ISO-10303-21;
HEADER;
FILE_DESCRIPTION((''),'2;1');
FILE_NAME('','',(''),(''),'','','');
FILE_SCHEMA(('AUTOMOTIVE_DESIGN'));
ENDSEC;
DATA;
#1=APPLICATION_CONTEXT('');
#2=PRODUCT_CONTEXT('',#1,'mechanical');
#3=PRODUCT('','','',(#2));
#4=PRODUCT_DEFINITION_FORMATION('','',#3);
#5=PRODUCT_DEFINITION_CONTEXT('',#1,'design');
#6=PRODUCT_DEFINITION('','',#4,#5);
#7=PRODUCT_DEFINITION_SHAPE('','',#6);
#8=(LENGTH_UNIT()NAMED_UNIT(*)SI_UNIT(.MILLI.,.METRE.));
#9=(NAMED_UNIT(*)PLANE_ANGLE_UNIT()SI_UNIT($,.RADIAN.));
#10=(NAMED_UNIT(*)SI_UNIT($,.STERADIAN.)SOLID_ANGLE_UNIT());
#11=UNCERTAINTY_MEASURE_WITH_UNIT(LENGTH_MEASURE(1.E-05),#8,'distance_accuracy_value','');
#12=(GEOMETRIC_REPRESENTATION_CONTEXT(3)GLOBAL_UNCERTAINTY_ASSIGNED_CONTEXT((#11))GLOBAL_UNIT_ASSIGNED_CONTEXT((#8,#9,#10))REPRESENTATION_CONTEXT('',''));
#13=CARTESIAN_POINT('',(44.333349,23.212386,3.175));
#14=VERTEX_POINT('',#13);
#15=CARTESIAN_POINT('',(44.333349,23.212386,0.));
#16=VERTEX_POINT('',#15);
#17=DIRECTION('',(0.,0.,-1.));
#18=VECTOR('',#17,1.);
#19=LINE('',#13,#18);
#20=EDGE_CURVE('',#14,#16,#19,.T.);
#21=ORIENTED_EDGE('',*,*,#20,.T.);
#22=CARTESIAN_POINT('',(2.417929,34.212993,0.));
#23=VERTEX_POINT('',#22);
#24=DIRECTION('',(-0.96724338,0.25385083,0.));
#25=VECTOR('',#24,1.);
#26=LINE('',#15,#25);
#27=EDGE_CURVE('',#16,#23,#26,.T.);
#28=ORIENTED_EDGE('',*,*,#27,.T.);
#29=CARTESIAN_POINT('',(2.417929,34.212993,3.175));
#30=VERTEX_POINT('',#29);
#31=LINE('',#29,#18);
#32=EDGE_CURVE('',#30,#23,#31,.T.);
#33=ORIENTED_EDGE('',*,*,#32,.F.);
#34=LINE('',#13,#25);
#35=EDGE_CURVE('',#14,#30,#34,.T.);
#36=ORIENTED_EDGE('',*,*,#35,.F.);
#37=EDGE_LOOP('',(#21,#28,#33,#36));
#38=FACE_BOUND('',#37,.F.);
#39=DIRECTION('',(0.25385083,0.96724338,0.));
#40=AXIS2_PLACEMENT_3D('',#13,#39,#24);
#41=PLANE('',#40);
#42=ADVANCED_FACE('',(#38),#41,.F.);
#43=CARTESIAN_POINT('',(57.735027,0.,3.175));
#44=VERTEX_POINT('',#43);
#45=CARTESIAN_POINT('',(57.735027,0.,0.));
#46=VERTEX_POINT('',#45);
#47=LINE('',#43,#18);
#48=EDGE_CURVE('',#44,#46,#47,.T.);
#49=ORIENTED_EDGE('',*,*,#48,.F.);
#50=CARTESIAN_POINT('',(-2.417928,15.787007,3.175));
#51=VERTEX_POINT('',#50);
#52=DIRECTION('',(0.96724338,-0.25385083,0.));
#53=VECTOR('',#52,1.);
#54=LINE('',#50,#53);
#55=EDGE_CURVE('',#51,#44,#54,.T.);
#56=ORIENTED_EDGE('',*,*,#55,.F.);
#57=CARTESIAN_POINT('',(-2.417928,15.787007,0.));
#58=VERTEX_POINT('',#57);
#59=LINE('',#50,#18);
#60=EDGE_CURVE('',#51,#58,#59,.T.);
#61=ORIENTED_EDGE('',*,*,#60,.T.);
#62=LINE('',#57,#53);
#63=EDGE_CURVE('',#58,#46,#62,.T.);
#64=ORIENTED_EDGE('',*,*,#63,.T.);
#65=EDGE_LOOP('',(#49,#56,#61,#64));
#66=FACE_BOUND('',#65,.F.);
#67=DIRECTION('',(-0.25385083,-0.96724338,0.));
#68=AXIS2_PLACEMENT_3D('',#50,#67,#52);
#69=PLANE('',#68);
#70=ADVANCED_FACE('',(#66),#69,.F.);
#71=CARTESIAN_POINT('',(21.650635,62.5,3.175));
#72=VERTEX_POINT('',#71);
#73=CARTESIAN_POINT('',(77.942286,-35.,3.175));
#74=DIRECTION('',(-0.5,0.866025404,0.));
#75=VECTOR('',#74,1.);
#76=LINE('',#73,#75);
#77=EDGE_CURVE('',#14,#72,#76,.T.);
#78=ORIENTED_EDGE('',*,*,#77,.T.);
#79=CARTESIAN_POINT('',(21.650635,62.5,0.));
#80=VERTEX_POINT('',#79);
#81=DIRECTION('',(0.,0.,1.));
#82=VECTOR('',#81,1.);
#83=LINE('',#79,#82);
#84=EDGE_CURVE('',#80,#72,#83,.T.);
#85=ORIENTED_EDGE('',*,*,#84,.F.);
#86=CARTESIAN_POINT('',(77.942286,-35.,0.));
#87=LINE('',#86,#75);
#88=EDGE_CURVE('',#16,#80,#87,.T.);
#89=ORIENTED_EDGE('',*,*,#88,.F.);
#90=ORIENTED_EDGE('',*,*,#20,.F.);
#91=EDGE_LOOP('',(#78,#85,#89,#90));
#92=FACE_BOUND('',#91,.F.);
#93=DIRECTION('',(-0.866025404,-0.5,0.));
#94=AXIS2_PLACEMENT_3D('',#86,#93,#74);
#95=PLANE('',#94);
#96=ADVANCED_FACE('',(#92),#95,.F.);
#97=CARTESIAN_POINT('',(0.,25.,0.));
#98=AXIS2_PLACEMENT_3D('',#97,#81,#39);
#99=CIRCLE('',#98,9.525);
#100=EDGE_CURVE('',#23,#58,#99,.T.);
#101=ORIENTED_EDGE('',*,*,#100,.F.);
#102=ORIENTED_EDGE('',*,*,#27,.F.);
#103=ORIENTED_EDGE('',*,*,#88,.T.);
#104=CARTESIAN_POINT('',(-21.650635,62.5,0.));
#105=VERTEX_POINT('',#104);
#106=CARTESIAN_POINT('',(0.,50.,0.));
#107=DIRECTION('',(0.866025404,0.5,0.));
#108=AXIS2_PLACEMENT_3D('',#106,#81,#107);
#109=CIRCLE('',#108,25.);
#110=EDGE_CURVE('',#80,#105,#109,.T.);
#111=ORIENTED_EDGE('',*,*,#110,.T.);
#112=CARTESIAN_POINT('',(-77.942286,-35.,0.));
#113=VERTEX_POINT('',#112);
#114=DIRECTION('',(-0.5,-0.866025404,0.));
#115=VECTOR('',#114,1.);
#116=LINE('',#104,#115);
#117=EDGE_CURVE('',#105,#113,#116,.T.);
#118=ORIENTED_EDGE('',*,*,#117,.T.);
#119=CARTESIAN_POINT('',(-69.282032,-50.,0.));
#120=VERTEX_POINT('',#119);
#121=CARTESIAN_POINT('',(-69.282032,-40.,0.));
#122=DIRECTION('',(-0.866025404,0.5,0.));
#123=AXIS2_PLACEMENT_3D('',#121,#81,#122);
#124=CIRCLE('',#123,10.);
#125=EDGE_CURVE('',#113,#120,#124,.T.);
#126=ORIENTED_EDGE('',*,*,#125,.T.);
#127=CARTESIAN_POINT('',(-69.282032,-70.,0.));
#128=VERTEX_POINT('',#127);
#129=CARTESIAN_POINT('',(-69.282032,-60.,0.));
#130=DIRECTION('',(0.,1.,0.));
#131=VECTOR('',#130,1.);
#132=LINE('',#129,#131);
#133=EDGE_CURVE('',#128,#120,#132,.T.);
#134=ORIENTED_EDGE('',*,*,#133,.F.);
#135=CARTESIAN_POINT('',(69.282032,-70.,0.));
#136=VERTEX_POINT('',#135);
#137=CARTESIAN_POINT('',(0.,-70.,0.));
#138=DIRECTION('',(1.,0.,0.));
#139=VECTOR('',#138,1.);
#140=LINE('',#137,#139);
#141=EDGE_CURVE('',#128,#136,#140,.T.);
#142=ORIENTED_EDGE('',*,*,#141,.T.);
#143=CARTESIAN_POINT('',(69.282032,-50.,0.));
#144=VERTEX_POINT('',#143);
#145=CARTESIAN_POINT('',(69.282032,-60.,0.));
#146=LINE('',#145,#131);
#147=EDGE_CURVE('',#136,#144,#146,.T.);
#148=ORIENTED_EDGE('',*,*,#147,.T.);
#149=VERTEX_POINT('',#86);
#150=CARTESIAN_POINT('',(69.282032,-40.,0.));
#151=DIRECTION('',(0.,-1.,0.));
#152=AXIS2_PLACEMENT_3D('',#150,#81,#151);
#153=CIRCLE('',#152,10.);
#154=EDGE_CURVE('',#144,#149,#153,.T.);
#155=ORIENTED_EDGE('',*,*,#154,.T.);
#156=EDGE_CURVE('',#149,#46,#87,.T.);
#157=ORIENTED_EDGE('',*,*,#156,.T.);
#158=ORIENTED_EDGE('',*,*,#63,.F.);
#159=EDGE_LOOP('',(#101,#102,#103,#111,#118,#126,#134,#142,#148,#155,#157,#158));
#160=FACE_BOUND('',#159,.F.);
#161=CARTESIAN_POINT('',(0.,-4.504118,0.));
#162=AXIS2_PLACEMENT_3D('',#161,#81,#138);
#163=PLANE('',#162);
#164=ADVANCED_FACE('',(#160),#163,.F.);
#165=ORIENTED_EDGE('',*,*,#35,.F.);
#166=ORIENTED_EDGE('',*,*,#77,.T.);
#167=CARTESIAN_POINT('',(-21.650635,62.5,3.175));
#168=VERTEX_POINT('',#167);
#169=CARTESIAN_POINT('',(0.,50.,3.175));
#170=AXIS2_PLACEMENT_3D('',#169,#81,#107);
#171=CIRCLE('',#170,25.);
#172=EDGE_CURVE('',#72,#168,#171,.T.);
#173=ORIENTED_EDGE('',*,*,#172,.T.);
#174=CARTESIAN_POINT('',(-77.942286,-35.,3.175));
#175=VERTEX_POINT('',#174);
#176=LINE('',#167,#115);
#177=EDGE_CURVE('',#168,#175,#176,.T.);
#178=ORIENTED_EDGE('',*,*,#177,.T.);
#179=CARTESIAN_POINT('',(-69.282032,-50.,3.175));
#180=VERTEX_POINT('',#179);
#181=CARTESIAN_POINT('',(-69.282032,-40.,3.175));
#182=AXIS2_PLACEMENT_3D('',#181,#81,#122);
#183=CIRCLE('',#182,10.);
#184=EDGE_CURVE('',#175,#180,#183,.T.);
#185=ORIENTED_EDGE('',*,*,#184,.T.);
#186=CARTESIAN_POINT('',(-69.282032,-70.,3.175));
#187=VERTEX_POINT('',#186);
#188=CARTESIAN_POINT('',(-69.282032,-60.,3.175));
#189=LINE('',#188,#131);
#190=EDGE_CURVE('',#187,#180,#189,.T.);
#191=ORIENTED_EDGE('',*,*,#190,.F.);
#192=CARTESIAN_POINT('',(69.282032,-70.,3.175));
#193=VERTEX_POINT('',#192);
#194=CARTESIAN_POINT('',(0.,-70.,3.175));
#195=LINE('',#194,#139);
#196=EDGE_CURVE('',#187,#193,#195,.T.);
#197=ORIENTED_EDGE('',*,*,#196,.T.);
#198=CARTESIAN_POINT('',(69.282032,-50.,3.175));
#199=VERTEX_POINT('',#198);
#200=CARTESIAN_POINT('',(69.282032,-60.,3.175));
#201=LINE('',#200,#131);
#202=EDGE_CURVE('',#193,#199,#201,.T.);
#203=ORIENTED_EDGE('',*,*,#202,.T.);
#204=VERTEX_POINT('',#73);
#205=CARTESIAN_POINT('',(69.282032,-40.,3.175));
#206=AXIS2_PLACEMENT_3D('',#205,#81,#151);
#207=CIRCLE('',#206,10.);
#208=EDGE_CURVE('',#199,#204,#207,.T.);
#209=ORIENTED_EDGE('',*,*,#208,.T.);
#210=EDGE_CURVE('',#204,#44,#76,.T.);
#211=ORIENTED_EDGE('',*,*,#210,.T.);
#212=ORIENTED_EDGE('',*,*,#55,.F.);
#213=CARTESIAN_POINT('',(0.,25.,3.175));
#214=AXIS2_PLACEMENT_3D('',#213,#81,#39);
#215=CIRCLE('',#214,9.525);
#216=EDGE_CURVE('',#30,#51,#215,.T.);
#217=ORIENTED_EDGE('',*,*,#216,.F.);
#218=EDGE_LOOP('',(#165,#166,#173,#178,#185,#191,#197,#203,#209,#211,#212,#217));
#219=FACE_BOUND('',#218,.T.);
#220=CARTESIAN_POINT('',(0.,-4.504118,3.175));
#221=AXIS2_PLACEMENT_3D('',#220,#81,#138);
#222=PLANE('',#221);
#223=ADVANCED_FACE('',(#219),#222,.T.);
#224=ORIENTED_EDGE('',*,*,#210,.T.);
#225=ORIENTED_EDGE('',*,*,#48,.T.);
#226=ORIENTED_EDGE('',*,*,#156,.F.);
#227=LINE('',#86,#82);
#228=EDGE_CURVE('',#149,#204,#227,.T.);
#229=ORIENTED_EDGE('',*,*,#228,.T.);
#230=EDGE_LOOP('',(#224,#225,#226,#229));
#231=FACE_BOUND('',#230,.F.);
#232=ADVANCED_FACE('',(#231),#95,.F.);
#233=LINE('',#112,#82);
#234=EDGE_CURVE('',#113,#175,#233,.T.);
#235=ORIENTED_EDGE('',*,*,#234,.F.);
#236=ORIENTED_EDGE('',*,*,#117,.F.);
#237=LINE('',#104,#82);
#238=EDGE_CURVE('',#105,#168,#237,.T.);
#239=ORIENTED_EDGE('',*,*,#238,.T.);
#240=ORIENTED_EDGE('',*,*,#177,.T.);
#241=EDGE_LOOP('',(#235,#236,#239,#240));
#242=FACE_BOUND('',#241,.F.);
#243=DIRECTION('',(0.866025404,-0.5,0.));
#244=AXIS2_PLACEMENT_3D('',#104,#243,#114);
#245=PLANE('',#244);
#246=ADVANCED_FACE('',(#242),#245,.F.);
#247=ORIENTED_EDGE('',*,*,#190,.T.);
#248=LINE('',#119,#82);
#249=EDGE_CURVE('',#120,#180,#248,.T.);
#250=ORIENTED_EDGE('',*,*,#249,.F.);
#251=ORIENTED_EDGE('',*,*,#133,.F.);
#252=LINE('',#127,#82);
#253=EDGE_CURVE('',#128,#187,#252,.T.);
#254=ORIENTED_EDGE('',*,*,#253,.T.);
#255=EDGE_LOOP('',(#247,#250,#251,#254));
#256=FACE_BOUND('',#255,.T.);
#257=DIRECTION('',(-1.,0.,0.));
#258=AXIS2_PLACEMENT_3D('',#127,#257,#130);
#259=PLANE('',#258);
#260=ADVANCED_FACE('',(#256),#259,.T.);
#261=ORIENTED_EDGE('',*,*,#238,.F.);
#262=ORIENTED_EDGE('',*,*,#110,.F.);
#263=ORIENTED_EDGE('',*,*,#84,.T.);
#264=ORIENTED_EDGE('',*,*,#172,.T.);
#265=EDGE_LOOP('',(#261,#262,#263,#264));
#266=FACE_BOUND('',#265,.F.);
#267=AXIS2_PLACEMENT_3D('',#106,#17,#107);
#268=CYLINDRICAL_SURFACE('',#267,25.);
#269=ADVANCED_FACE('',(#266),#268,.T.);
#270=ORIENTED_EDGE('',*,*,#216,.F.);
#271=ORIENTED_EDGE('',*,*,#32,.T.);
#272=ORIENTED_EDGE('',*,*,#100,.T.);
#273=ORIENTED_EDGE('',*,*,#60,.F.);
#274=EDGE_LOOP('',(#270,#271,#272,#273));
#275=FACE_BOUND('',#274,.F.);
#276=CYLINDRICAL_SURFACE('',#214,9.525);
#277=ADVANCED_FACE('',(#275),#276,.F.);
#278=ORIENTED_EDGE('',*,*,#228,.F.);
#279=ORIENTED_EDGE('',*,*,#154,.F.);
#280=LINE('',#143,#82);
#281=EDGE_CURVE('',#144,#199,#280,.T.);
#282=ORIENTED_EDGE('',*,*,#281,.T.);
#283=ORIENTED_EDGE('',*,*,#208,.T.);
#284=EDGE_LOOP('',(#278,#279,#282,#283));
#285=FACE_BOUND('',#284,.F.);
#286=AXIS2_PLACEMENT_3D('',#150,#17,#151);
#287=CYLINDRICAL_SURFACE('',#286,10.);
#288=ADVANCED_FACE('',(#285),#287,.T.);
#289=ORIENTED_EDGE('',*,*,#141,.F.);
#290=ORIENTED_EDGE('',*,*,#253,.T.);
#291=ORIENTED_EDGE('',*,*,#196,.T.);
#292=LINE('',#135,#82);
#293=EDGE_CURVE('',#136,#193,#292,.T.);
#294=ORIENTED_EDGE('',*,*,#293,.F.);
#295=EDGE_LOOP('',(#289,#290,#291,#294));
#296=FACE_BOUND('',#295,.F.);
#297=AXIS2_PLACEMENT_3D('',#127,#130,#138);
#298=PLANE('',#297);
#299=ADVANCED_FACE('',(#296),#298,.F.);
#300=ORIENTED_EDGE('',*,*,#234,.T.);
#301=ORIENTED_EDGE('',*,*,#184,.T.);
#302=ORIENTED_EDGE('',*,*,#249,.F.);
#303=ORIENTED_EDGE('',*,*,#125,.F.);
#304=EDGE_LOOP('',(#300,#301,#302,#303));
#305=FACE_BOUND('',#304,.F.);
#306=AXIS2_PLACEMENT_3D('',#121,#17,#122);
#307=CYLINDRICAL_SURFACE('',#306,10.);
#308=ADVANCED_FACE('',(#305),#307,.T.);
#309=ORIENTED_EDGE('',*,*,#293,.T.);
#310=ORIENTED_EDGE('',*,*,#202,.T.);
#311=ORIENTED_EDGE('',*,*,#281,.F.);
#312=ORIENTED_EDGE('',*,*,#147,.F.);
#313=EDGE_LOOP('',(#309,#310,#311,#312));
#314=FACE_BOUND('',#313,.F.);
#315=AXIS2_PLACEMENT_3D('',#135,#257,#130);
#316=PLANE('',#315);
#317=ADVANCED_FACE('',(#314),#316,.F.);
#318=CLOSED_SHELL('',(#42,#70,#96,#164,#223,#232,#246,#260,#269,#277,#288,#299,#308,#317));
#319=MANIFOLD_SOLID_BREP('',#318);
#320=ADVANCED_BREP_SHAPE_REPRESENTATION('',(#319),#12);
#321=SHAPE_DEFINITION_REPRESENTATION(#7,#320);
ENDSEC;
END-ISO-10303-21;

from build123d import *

# Parameters (mm, degrees)
F0_W     = 138.5640646055
F0_H     = 20
F1_DEPTH = 3.175
F3_DEPTH = 3.175


# Not quite as in the source:
# - a length typed as a fraction of an inch, garbled in the dataset ("3 / 203.2 mm" for 3/8 in), is restored


with BuildPart() as f1:
    # F0 (on Top) → F1 (new body)
    with BuildSketch(Plane.XY):
        with BuildLine():
            Line((77.9422863406, -35), (21.6506350946, 62.5))
            ThreePointArc((21.6506350946, 62.5), (0, 75), (-21.6506350946, 62.5))
            Line((-21.6506350946, 62.5), (-77.9422863406, -35))
            ThreePointArc((-77.9422863406, -35), (-77.9422863406, -45), (-69.2820323028, -50))
            Line((-69.2820323028, -50), (69.2820323028, -50))
            ThreePointArc((69.2820323028, -50), (77.9422863406, -45), (77.9422863406, -35))
        make_face()
        with Locations((0, -60)):
            Rectangle(F0_W, F0_H)
    extrude(amount=F1_DEPTH)

    # F2 (on face) → F3 (cut, through all)
    with BuildSketch(Plane.XY.offset(3.175)):
        with BuildLine():
            ThreePointArc((2.4179291552, 34.2129931944), (7.5417637262, 30.8178539771), (9.525, 25))
            ThreePointArc((9.525, 25), (5.8178542624, 17.4582364939), (-2.4179284582, 15.7870066226))
            Line((-2.4179284582, 15.7870066226), (57.735026919, 0))
            Line((57.735026919, 0), (44.3333494626, 23.2123862611))
            Line((44.3333494626, 23.2123862611), (2.4179291552, 34.2129931944))
        make_face()
        with BuildLine():
            ThreePointArc((-2.4179284582, 15.7870066226), (5.8178542624, 17.4582364939), (9.525, 25))
            ThreePointArc((9.525, 25), (7.5417637262, 30.8178539771), (2.4179291552, 34.2129931944))
            ThreePointArc((2.4179291552, 34.2129931944), (-9.2129932859, 27.4179288067), (-2.4179284582, 15.7870066226))
        make_face()
    extrude(amount=-F3_DEPTH, mode=Mode.SUBTRACT)


solid = f1.part
